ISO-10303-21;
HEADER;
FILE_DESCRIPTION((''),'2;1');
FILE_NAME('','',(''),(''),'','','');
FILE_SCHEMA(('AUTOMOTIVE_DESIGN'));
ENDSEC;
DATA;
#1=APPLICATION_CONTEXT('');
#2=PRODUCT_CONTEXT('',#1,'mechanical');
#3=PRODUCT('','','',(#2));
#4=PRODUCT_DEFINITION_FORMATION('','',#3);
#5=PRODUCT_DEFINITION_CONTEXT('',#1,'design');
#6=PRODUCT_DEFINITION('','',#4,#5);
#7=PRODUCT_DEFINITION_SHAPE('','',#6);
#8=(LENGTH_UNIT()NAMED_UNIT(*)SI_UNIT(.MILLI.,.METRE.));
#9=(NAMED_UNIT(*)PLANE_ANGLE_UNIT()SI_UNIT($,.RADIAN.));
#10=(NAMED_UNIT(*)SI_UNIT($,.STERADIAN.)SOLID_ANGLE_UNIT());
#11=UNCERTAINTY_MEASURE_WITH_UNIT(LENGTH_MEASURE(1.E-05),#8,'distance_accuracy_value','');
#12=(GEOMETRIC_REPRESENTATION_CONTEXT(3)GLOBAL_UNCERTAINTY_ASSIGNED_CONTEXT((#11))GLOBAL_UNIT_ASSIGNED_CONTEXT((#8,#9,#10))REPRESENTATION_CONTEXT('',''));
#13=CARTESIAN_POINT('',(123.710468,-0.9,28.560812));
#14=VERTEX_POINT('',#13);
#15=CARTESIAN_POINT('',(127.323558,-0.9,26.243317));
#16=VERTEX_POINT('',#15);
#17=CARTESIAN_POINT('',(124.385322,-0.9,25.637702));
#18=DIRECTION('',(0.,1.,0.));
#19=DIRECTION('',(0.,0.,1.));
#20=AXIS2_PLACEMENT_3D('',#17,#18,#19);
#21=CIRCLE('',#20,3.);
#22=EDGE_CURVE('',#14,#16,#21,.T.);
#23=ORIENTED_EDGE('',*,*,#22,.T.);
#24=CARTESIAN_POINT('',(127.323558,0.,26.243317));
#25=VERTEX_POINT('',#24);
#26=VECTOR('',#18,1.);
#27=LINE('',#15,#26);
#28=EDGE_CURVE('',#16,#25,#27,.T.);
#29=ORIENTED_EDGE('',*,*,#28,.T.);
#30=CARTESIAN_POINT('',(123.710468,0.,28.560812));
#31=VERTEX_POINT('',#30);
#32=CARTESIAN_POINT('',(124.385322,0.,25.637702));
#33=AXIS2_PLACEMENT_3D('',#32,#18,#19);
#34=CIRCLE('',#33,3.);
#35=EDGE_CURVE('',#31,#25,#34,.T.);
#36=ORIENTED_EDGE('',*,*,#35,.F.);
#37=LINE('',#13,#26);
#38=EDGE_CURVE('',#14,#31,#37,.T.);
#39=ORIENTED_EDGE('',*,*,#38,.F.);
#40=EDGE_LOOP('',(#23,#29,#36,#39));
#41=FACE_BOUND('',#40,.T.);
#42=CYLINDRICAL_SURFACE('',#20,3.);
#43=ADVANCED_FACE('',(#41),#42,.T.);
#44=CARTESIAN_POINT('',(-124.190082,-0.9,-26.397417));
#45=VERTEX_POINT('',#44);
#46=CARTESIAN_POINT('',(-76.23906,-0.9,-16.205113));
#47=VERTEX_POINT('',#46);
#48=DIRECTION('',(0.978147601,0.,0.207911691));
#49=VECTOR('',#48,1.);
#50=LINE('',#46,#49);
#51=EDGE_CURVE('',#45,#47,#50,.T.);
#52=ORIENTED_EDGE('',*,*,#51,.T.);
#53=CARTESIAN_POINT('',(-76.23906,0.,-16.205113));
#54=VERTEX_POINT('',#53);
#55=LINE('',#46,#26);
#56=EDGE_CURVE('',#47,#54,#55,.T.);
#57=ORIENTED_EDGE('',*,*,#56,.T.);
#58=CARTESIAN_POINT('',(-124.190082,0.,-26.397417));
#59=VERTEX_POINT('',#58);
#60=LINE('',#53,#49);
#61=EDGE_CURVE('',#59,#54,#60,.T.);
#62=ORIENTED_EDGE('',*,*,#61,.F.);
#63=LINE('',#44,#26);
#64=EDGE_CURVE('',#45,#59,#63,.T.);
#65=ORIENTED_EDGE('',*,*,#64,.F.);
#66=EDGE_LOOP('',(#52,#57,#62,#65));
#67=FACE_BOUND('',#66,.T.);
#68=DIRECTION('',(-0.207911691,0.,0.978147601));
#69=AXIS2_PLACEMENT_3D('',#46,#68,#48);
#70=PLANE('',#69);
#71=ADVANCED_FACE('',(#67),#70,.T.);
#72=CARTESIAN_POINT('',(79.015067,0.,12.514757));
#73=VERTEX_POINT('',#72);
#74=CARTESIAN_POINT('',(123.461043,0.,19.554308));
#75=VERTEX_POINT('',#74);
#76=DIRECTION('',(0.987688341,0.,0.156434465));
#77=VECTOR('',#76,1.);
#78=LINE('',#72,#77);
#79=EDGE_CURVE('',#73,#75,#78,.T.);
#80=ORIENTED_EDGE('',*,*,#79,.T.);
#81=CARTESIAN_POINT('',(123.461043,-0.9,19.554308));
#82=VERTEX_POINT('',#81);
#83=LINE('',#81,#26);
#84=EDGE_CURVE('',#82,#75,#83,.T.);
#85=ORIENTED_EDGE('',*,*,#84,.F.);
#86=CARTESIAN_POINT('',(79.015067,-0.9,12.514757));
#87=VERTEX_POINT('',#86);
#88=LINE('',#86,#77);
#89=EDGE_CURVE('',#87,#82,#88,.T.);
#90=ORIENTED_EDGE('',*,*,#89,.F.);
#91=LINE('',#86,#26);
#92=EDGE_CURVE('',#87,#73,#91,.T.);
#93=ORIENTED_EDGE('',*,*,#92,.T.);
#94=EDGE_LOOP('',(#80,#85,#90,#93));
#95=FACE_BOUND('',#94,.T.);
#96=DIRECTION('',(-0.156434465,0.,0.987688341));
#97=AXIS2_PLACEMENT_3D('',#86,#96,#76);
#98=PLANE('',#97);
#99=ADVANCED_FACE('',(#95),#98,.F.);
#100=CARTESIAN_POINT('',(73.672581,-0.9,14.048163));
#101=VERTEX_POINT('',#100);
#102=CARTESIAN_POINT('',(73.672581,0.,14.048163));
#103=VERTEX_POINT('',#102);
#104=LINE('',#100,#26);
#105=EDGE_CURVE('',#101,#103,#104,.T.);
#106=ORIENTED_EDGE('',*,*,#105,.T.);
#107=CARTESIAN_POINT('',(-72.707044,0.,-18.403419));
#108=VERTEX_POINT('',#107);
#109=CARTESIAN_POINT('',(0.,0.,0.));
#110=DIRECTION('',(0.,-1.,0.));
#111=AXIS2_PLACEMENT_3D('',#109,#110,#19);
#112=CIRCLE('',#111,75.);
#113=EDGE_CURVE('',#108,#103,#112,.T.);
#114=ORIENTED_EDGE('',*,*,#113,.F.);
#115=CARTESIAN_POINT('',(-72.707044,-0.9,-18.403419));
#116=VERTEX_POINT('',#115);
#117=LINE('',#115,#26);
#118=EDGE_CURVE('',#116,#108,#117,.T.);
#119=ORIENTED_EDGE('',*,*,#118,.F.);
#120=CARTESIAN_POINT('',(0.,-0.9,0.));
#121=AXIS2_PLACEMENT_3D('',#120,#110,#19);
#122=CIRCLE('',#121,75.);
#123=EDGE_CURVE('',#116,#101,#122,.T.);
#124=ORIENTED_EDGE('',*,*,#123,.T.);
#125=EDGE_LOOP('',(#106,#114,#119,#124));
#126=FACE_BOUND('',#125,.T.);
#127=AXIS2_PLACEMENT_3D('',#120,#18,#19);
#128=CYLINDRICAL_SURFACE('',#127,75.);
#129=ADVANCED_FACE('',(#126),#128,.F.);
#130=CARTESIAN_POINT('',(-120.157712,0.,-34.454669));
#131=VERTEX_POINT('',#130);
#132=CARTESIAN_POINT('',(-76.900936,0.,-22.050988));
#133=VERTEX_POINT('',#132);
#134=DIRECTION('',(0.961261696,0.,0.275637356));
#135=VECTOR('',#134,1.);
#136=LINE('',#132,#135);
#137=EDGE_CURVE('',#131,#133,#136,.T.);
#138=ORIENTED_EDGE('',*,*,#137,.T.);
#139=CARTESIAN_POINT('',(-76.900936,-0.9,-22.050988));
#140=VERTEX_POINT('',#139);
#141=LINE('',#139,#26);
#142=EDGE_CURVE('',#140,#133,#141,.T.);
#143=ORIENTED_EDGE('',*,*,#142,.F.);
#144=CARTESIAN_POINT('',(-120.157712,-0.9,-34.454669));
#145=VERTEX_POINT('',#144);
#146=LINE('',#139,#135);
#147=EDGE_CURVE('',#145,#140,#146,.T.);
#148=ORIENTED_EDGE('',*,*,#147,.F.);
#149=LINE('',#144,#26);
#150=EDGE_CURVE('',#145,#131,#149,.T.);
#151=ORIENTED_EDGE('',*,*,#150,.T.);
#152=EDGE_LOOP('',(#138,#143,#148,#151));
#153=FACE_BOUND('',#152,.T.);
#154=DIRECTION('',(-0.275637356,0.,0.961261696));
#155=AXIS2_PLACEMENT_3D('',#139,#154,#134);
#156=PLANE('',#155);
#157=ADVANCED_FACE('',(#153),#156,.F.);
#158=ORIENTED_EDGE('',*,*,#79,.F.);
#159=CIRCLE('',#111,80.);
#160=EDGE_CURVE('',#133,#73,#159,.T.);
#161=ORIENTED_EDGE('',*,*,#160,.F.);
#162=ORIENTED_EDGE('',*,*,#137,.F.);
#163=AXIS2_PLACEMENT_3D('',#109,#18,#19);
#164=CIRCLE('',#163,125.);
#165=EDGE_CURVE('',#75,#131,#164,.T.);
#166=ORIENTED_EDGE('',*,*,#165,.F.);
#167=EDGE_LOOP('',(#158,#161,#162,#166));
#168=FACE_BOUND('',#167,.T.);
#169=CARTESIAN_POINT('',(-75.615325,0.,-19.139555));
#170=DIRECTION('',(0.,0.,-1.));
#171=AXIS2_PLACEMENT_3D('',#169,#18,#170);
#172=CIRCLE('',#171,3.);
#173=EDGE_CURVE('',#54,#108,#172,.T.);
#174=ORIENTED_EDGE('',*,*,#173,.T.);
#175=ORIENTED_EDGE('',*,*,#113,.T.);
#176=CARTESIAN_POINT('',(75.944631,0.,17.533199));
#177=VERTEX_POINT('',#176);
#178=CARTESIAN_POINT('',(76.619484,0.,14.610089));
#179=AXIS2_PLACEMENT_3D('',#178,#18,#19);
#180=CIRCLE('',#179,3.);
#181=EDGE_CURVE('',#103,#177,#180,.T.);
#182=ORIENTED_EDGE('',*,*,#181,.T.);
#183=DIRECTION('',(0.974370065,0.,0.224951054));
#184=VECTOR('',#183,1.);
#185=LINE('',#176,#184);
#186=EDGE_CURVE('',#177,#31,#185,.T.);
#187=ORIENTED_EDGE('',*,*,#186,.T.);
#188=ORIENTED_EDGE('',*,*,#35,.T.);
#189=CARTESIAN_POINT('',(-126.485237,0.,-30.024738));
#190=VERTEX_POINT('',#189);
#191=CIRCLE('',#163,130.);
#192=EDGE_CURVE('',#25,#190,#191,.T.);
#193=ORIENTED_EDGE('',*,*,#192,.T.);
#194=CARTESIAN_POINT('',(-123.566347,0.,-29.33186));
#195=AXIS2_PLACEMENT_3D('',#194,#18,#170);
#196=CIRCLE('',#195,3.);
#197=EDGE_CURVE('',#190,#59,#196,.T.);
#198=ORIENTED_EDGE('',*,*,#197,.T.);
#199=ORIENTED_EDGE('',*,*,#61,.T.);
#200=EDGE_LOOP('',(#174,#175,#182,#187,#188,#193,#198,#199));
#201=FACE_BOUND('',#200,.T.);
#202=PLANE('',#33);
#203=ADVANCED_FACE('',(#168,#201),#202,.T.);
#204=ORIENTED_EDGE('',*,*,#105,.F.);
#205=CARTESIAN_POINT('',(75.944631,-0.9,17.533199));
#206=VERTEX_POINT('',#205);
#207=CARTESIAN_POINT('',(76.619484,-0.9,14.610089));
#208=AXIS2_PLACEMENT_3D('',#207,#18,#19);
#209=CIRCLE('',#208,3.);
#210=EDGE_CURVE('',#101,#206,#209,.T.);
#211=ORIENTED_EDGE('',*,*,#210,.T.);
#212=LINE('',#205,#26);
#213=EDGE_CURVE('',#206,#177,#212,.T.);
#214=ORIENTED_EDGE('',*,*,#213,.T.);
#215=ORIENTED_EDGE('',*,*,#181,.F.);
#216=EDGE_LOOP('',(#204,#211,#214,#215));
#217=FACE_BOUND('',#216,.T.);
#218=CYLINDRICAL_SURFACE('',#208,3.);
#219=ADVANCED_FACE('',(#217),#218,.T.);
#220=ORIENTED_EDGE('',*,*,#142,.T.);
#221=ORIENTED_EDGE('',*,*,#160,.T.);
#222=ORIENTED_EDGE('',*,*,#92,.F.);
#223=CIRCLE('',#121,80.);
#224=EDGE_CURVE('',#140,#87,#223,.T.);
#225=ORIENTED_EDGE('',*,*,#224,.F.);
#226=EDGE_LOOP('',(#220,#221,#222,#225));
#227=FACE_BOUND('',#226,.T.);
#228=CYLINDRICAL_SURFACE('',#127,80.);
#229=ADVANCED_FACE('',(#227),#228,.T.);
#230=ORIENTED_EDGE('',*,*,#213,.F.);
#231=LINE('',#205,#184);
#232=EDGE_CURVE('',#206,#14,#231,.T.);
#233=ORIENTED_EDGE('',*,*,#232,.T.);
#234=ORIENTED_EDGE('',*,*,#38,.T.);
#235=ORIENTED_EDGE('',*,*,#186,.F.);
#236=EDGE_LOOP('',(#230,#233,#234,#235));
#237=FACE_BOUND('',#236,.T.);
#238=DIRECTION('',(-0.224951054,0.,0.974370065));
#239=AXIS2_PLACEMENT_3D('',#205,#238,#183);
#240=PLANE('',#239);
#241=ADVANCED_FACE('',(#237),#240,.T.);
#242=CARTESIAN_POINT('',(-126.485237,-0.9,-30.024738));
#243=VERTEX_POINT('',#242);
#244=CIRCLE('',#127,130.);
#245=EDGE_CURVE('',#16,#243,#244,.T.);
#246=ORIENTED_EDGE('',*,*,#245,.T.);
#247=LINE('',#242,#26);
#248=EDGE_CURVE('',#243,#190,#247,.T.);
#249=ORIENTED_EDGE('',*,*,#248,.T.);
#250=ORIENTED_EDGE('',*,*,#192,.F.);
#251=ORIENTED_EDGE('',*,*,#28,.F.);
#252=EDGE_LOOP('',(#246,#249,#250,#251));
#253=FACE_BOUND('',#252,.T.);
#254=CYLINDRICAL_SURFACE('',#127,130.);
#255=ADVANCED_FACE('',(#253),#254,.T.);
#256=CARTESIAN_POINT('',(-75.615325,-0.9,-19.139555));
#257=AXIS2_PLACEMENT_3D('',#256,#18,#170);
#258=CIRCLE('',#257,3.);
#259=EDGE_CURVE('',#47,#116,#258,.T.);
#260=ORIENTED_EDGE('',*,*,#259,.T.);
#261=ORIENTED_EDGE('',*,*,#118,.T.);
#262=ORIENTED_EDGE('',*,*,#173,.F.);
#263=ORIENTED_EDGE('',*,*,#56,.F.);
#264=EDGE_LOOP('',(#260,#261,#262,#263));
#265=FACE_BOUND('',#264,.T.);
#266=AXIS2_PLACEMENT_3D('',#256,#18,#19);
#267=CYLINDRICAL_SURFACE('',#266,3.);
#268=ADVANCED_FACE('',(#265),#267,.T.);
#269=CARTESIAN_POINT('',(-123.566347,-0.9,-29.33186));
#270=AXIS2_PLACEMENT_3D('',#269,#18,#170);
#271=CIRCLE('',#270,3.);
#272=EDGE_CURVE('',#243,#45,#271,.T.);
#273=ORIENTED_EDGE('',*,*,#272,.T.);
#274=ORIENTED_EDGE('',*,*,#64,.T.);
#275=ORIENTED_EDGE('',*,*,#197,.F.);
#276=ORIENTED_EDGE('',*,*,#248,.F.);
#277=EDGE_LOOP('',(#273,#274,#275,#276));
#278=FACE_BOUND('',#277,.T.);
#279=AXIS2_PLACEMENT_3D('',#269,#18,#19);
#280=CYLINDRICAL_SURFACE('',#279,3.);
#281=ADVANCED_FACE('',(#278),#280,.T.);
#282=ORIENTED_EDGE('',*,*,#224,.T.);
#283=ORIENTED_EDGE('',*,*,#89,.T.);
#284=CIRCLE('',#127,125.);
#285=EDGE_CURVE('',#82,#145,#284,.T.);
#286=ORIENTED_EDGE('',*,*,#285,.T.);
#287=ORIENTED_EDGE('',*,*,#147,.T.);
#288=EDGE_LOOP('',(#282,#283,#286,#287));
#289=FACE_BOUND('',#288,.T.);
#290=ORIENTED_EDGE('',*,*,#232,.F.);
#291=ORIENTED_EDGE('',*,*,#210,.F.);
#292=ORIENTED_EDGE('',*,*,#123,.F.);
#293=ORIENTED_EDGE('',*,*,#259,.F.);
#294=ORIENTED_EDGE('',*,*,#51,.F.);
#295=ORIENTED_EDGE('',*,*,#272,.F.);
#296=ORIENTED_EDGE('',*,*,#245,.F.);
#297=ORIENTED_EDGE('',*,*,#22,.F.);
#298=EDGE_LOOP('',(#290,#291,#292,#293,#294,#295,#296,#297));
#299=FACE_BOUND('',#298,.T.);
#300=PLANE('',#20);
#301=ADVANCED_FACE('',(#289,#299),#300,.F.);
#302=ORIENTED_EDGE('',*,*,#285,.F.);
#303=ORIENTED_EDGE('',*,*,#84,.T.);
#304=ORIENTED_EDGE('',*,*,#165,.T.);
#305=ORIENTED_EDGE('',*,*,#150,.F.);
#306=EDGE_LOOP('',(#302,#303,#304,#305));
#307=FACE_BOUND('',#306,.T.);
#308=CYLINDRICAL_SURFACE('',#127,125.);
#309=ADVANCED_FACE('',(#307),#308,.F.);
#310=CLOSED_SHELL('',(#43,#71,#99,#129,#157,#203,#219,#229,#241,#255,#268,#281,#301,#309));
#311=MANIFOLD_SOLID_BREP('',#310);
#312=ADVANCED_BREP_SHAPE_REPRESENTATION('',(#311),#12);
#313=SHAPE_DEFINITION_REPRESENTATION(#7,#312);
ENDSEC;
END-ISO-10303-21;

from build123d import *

# Parameters (mm, degrees)
BASE_FLANGE1_DEPTH = 0.9


# Sheet-metal steps are written as plain solids
with BuildPart() as part:
    # Sketch1 → Base-Flange1 (new body)
    with BuildSketch(Plane(origin=(0, 0, 0), x_dir=(1, 0, 0), z_dir=(0, 1, 0))):
        with BuildLine():
            Line((-76.23906038, 16.205112539), (-124.190081684, 26.397416756))
            ThreePointArc((-124.190081684, 26.397416756), (-126.101482372, 27.727775186), (-126.485236689, 30.024738131))
            ThreePointArc((-126.485236689, 30.024738131), (28.137149812, 126.918480926), (127.323557594, -26.243316894))
            ThreePointArc((127.323557594, -26.243316894), (126.005019582, -28.162890715), (123.710468487, -28.560812083))
            Line((123.710468487, -28.560812083), (75.944630591, -17.53319949))
            ThreePointArc((75.944630591, -17.53319949), (74.106388046, -16.248487893), (73.672580533, -14.048162785))
            ThreePointArc((73.672580533, -14.048162785), (16.232971045, 73.222200534), (-72.707043565, 18.403418598))
            ThreePointArc((-72.707043565, 18.403418598), (-74.030104265, 16.592581795), (-76.23906038, 16.205112539))
        make_face()
        with BuildLine():
            Line((-76.900935675, 22.050988465), (-120.157711992, 34.454669477))
            ThreePointArc((-120.157711992, 34.454669477), (27.054951742, 122.03700089), (123.461042574, -19.55430813))
            Line((123.461042574, -19.55430813), (79.015067248, -12.514757203))
            ThreePointArc((79.015067248, -12.514757203), (17.315169115, 78.10368057), (-76.900935675, 22.050988465))
        make_face(mode=Mode.SUBTRACT)
    extrude(amount=-BASE_FLANGE1_DEPTH)


solid = part.part
